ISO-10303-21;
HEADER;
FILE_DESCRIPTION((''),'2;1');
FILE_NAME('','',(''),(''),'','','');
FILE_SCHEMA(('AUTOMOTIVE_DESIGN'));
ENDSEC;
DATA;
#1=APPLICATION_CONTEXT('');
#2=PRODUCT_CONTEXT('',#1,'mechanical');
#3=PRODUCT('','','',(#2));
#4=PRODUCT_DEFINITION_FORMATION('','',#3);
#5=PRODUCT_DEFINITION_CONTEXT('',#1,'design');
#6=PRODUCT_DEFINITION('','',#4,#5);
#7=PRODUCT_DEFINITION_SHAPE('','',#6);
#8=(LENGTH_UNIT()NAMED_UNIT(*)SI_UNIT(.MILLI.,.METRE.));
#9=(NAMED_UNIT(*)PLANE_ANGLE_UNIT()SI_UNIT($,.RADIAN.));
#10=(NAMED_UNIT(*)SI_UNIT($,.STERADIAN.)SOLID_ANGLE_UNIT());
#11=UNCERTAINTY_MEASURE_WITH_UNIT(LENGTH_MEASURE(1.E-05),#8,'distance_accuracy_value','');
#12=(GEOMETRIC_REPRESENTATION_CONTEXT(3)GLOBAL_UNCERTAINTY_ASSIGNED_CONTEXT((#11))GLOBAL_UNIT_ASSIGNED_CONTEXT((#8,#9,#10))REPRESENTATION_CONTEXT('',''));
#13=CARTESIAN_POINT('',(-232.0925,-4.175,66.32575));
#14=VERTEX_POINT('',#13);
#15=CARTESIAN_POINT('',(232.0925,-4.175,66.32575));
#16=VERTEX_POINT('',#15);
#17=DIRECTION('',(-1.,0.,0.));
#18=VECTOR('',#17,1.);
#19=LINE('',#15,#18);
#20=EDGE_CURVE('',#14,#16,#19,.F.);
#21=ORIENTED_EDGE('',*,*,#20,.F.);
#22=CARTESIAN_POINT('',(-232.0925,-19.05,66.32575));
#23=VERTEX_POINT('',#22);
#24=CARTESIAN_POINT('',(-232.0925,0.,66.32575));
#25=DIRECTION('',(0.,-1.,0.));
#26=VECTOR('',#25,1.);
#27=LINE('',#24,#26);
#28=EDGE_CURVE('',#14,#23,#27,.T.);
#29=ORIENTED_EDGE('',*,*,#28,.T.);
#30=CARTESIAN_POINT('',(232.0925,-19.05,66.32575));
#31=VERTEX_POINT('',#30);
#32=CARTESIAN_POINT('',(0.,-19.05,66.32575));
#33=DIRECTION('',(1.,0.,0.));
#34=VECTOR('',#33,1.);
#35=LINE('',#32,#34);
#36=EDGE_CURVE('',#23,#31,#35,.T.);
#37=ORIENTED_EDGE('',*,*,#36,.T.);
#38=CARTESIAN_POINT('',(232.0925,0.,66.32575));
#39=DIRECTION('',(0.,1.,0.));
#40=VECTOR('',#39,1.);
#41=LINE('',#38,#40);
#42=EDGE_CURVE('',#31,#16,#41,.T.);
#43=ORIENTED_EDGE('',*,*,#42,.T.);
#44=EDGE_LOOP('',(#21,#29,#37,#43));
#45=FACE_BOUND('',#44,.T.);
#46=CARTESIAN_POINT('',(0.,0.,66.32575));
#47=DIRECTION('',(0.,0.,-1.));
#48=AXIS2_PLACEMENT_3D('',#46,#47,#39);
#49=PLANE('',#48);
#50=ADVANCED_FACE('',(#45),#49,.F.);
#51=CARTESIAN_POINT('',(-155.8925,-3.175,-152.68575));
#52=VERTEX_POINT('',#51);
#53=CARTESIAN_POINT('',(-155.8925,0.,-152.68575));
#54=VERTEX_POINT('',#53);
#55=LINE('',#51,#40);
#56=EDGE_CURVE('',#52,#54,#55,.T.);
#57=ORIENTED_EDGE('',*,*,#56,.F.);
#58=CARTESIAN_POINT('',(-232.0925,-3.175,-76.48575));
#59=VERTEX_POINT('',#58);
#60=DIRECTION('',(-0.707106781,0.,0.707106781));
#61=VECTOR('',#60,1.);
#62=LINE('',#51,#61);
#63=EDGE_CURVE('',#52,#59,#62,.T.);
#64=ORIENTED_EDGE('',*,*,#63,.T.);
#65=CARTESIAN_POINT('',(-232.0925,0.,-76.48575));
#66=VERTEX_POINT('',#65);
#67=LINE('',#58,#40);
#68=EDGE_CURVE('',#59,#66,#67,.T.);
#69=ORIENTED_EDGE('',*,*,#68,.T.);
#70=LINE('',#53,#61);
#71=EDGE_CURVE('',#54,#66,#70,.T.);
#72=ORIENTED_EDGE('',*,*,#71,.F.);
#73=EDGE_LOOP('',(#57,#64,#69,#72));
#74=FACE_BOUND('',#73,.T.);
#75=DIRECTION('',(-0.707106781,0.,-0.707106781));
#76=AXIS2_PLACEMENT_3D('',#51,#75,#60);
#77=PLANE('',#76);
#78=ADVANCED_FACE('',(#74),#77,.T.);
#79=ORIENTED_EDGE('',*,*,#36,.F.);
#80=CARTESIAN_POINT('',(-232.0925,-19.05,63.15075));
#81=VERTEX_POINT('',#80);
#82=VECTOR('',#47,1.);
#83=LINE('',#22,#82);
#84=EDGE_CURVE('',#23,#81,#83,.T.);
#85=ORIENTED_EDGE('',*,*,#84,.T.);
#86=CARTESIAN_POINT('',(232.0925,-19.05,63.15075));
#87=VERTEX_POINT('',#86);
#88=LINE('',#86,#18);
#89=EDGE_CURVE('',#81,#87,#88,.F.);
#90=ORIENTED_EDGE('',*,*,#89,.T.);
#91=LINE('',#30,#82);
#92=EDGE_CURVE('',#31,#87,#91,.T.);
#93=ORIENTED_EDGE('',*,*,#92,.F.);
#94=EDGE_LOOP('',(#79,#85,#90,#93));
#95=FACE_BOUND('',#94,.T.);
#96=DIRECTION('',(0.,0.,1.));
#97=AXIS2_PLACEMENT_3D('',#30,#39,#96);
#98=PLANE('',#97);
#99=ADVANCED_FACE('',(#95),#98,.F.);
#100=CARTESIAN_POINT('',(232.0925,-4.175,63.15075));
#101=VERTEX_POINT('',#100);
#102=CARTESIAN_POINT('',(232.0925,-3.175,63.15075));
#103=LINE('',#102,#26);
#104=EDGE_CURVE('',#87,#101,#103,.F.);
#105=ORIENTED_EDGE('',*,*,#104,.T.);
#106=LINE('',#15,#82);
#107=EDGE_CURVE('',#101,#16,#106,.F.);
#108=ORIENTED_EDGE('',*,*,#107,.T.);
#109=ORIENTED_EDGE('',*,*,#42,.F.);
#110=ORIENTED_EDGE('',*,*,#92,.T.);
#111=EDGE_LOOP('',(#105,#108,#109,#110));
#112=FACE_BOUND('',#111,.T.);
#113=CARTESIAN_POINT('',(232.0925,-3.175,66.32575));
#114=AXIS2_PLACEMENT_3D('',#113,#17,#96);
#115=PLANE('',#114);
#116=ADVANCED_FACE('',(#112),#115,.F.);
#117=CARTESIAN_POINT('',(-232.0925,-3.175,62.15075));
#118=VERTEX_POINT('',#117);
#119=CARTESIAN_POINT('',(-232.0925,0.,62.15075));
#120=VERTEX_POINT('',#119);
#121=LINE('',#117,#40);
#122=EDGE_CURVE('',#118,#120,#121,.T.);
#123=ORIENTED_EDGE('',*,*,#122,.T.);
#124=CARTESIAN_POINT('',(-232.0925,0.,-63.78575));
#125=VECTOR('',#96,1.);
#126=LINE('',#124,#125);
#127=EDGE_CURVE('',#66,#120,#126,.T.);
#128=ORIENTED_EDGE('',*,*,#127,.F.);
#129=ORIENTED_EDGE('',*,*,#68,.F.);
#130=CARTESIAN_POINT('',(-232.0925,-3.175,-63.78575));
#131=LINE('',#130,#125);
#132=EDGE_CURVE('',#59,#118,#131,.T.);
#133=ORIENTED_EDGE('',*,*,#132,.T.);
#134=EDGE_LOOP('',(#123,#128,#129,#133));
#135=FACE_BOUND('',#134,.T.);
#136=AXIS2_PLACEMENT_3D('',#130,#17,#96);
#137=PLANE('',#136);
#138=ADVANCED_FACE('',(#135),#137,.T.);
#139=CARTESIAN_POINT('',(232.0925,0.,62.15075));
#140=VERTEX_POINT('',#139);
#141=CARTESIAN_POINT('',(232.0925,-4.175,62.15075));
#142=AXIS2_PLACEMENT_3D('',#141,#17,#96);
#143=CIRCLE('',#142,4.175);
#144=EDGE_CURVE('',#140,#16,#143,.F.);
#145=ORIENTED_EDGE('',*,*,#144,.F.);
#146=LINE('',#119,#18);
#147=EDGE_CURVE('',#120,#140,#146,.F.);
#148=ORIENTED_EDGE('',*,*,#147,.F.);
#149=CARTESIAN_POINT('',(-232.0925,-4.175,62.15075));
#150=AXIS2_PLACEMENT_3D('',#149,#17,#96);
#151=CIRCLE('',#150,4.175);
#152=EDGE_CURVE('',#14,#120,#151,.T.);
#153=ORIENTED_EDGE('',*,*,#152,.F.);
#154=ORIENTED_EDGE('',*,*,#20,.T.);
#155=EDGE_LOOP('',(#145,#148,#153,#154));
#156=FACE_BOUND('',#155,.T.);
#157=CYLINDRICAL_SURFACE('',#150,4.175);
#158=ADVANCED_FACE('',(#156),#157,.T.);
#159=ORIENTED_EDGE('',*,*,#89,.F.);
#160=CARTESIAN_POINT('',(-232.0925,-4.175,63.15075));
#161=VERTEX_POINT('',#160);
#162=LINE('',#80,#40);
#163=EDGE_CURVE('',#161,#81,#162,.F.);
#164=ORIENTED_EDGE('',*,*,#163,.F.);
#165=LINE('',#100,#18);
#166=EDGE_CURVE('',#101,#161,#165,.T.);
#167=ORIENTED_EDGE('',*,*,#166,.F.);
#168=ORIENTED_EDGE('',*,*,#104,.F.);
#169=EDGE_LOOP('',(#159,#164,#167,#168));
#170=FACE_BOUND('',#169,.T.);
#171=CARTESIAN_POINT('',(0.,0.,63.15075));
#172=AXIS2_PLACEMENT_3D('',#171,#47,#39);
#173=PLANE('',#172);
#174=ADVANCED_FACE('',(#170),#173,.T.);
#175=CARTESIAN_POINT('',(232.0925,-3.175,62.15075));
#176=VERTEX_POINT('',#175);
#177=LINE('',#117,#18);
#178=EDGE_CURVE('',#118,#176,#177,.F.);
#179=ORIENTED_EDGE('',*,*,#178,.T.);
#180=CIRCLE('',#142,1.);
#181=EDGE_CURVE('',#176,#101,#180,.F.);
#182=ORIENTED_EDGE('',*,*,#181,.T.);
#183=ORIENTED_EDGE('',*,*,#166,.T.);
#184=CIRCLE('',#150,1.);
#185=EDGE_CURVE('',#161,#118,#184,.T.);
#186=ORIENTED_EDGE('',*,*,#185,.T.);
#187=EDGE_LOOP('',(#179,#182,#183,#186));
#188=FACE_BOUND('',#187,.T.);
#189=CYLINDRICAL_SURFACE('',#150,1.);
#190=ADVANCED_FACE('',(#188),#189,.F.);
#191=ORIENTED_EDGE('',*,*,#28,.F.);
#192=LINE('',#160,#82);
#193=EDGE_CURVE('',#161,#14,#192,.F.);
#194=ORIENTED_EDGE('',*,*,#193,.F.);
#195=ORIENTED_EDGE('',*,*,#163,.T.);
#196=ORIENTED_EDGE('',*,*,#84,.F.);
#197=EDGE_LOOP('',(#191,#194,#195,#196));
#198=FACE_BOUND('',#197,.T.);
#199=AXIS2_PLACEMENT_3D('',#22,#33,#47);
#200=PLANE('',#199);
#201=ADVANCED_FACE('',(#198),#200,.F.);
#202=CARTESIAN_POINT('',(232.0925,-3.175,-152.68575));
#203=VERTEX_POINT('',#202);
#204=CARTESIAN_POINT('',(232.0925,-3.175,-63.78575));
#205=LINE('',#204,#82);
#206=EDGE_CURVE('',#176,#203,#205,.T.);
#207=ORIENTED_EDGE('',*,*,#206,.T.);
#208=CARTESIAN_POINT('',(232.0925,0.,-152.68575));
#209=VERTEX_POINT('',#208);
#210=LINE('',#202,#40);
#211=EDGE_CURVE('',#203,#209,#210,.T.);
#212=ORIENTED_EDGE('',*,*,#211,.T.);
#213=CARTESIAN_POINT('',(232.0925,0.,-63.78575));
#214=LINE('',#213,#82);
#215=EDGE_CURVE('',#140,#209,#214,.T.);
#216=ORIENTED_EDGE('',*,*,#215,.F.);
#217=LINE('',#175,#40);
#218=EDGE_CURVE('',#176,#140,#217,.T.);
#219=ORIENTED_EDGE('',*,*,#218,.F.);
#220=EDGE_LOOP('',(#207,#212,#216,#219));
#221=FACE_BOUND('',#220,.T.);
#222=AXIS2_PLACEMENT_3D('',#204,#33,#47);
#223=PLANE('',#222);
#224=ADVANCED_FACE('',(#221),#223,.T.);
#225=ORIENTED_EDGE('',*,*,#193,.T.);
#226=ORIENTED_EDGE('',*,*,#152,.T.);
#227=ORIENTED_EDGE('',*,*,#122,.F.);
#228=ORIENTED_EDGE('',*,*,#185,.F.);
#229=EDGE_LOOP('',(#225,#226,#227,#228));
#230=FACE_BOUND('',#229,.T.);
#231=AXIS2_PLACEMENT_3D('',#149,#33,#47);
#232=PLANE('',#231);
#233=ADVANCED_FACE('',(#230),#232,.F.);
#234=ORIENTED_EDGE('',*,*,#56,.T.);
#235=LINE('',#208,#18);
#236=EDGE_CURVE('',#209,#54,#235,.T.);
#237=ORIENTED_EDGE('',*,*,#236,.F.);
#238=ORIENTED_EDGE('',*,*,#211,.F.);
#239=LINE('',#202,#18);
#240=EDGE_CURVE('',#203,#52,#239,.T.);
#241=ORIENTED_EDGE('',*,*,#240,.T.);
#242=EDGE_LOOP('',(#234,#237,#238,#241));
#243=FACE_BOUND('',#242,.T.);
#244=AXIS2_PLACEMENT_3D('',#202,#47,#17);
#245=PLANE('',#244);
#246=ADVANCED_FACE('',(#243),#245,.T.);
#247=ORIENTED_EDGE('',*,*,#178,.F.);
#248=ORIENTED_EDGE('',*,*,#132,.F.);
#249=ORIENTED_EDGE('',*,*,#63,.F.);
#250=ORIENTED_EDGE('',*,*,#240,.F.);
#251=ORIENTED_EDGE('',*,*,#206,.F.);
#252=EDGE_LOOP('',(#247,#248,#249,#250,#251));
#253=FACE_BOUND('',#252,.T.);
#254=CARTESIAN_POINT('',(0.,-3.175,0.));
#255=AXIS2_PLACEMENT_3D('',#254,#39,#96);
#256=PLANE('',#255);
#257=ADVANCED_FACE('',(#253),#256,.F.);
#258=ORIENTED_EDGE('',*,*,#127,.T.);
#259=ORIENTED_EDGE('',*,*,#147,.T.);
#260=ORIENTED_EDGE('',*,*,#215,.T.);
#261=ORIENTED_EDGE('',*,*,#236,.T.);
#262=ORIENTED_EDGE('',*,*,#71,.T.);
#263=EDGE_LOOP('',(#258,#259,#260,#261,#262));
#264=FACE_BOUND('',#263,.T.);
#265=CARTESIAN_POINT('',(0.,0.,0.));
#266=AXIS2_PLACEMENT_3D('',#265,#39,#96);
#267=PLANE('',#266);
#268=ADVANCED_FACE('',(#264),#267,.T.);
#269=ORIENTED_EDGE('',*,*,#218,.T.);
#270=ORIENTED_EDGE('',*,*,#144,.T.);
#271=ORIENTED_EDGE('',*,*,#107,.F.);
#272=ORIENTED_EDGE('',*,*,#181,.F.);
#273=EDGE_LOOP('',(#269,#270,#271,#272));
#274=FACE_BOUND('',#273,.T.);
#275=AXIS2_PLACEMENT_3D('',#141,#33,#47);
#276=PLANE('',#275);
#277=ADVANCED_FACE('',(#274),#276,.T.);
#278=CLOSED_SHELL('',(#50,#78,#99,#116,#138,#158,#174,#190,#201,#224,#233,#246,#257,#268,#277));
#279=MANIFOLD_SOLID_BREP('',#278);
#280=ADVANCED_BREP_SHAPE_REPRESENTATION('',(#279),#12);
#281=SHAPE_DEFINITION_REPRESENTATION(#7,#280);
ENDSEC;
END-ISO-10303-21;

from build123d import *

# Parameters (mm, degrees)
SKETCH2_W                    = 464.185
SKETCH2_H                    = 127.5715
BASE_FLANGE1_DEPTH           = 3.175
BOSS_EXTRUDE1_DEPTH          = 3.175
EDGE_FLANGE1_STRIP_W         = 17.24
EDGE_FLANGE1_STRIP_H         = 3.175
EDGE_FLANGE1_STRIP_CUT_DEPTH = 464.185
EDGE_FLANGE1_DEPTH           = 464.185


# Sheet-metal steps are written as plain solids
with BuildPart() as part:
    # Sketch2 → Base-Flange1 (new body)
    with BuildSketch(Plane(origin=(0, 0, 0), x_dir=(1, 0, 0), z_dir=(0, 1, 0))):
        Rectangle(SKETCH2_W, SKETCH2_H)
    extrude(amount=-BASE_FLANGE1_DEPTH)

    # Sketch7 → Boss-Extrude1 (add)
    with BuildSketch(Plane(origin=(0, 0, 0), x_dir=(1, 0, 0), z_dir=(0, 1, 0))):
        Polygon((-232.0925, 63.78575), (232.0925, 63.78575), (232.0925, 152.68575), (-155.8925, 152.68575), (-232.0925, 76.48575), align=None)
    extrude(amount=-BOSS_EXTRUDE1_DEPTH)

    # Edge-Flange1 strip (across the edge) → Edge-Flange1 strip cut (cut)
    with BuildSketch(Plane(origin=(232.0925, -3.175, 66.32575), x_dir=(0, 0, -1), z_dir=(-1, 0, 0))):
        with Locations((-4.445, -1.5875)):
            Rectangle(EDGE_FLANGE1_STRIP_W, EDGE_FLANGE1_STRIP_H)
    extrude(amount=EDGE_FLANGE1_STRIP_CUT_DEPTH, mode=Mode.SUBTRACT)

    # Edge-Flange1 section (across the edge) → Edge-Flange1 (add)
    with BuildSketch(Plane(origin=(232.0925, -3.175, 66.32575), x_dir=(0, 0, -1), z_dir=(-1, 0, 0))):
        with BuildLine():
            Line((0, 1), (0, 15.875))
            Line((0, 15.875), (3.175, 15.875))
            Line((3.175, 15.875), (3.175, 1))
            ThreePointArc((3.175, 1), (3.467893219, 0.292893219), (4.175, 0))
            Line((4.175, 0), (4.175, -3.175))
            ThreePointArc((4.175, -3.175), (1.222829189, -1.952170811), (0, 1))
        make_face()
    extrude(amount=EDGE_FLANGE1_DEPTH)


solid = part.part
